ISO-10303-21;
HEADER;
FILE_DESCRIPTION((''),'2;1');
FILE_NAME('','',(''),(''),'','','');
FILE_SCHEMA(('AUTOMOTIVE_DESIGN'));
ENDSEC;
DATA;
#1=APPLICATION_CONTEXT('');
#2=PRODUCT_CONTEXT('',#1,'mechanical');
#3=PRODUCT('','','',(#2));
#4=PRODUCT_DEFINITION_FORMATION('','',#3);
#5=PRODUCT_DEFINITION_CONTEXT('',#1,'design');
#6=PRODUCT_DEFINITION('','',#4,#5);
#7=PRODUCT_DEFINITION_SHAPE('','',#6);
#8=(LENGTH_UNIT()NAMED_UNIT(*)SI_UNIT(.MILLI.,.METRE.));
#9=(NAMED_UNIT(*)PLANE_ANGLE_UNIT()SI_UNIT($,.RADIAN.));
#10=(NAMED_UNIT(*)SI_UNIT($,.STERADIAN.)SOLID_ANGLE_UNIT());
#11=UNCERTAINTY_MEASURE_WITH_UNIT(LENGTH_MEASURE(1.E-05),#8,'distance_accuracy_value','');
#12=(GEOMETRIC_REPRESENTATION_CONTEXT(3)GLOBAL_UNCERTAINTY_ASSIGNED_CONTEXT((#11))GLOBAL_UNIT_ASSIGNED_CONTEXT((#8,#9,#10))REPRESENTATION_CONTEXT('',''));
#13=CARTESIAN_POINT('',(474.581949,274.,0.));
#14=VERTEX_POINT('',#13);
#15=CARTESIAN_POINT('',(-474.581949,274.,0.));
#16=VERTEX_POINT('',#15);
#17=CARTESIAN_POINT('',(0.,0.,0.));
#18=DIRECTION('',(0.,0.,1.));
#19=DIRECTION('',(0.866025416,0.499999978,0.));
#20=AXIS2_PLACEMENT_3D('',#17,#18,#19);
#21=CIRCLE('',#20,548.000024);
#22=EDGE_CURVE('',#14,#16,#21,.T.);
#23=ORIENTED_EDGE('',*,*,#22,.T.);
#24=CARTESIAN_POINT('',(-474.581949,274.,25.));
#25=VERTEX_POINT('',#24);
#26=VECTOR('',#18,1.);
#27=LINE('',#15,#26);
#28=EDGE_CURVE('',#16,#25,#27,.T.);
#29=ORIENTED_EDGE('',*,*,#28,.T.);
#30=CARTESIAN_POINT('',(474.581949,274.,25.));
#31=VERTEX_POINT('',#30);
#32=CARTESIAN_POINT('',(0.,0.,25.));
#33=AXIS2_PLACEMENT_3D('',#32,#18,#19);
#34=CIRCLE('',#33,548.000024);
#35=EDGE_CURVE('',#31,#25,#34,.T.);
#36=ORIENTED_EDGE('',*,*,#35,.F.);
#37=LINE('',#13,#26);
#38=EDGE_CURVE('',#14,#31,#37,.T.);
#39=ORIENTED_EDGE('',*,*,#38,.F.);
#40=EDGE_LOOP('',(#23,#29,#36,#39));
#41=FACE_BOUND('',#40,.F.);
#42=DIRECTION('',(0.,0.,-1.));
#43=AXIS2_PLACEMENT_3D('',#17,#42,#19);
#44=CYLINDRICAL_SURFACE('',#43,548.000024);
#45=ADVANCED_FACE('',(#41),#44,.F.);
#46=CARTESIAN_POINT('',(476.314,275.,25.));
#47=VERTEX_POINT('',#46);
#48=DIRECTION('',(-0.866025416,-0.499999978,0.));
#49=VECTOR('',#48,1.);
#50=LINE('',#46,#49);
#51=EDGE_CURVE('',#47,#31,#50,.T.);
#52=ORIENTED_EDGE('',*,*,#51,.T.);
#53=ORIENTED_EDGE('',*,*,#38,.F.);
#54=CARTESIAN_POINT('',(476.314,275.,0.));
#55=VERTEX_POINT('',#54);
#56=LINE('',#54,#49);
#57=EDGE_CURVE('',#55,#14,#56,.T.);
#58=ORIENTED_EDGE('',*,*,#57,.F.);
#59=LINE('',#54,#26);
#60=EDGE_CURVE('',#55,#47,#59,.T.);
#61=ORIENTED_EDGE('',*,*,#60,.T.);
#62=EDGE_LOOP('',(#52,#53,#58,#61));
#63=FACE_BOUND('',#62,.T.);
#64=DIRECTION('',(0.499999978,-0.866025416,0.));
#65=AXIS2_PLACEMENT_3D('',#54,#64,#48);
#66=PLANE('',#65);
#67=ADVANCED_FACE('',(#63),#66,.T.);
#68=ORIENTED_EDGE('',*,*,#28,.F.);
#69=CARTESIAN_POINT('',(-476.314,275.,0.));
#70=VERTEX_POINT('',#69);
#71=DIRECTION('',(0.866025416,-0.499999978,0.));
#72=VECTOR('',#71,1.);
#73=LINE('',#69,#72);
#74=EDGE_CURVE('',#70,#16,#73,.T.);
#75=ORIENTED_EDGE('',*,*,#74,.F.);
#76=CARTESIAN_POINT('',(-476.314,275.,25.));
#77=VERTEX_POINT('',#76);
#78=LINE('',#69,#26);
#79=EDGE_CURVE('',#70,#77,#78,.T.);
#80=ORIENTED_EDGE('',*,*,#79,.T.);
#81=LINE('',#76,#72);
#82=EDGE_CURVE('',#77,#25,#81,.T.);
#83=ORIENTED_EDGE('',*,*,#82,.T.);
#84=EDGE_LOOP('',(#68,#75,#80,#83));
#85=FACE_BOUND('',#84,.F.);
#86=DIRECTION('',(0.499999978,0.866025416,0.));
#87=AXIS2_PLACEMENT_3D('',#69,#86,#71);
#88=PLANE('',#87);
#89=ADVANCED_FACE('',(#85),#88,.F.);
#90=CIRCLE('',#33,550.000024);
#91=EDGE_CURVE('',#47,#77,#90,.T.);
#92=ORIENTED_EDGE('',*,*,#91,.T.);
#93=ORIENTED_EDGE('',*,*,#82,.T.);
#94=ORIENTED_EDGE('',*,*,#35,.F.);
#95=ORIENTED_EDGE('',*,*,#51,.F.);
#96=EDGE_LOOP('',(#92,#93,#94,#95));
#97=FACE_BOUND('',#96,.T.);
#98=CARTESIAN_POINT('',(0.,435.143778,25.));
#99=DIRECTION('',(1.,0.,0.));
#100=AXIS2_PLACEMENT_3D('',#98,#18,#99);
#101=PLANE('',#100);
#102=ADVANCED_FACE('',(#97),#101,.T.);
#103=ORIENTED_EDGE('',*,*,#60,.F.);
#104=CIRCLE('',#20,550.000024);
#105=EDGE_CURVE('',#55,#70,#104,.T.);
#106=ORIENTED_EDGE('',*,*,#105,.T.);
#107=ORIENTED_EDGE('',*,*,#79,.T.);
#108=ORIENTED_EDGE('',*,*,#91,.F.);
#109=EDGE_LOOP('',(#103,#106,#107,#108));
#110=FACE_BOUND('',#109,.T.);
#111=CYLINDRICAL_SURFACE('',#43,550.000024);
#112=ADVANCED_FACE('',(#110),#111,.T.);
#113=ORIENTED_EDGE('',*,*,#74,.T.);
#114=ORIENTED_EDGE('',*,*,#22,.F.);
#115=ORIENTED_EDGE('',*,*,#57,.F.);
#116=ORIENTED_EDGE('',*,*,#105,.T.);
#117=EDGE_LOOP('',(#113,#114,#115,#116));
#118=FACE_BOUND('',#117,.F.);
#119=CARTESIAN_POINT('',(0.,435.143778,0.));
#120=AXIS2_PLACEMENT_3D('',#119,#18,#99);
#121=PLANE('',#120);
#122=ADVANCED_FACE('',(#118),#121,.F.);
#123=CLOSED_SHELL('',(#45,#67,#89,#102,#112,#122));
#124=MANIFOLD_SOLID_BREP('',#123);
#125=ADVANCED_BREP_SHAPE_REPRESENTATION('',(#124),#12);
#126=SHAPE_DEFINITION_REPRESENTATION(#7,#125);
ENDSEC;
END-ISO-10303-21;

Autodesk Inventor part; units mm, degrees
ref_plane "YZ Plane" through (0, 0, 0) normal (1, 0, 0) x (0, 1, 0)
ref_plane "XZ Plane" through (0, 0, 0) normal (0, 1, 0) x (-1, 0, 0)
ref_plane "XY Plane" through (0, 0, 0) normal (0, 0, 1) x (1, 0, 0)
sketch "Sketch1" plane through (0, 0, 0) normal (0, 0, 1) x (1, 0, 0)
  arc A0 (476.314, 275) -> (-476.314, 275) centre (0, 0) ccw
  line L0 (0, 0) -> (-476.314, 275) construction
  line L1 (0, 0) -> (0, 362.16) construction
  line L2 (0, 0) -> (476.314, 275) construction
  arc A1 (-476.314, 275) -> (476.314, 275) centre (0, 0) ccw construction
  point P0 (-311.7691, 180)
  point P1 (311.7691, 180)
  dimension "d28" = 1100
  dimension "d30" = 120
contour flange "Contour Flange1" sketch "Sketch1" thickness 2 bend radius 2 width 25 along (0, 0, 1) mid plane no both sides no wall seen from (0, 550, 0) lies toward (0, -1, 0) curves A0
bend "Bend1"
corner "Corner1"
equation "\"d28\" = Шстр_диам_внутр"
equation "\"d31\" = Thickness"
equation "\"d32\" = BendReliefWidth"
equation "\"d33\" = BendReliefDepth"
equation "\"d34\" = MinimumRemnant"
equation "\"d35\" = TransitionRadius"
equation "\"d37\" = BendRadius"
equation "\"d39\" = CornerReliefSize"
equation "\"d40\" = GapSize"
equation "\"d41\" = JacobiRadiusSize"
equation "\"BendRadius\" = Thickness"
equation "\"BendReliefWidth\" = Thickness"
equation "\"BendReliefDepth\" = 0.5 * Thickness"
equation "\"CornerReliefSize\" = 4 * Thickness"
equation "\"MinimumRemnant\" = 2 * Thickness"
equation "\"TransitionRadius\" = BendRadius"
equation "\"JacobiRadiusSize\" = BendRadius"
equation "\"GapSize\" = Thickness"
equation "\"Шстр_диам_внутр\" = 1100"
equation "\"Thickness\" = 2"
properties part number "DMF2.0 01 44 Gear rim 4"
